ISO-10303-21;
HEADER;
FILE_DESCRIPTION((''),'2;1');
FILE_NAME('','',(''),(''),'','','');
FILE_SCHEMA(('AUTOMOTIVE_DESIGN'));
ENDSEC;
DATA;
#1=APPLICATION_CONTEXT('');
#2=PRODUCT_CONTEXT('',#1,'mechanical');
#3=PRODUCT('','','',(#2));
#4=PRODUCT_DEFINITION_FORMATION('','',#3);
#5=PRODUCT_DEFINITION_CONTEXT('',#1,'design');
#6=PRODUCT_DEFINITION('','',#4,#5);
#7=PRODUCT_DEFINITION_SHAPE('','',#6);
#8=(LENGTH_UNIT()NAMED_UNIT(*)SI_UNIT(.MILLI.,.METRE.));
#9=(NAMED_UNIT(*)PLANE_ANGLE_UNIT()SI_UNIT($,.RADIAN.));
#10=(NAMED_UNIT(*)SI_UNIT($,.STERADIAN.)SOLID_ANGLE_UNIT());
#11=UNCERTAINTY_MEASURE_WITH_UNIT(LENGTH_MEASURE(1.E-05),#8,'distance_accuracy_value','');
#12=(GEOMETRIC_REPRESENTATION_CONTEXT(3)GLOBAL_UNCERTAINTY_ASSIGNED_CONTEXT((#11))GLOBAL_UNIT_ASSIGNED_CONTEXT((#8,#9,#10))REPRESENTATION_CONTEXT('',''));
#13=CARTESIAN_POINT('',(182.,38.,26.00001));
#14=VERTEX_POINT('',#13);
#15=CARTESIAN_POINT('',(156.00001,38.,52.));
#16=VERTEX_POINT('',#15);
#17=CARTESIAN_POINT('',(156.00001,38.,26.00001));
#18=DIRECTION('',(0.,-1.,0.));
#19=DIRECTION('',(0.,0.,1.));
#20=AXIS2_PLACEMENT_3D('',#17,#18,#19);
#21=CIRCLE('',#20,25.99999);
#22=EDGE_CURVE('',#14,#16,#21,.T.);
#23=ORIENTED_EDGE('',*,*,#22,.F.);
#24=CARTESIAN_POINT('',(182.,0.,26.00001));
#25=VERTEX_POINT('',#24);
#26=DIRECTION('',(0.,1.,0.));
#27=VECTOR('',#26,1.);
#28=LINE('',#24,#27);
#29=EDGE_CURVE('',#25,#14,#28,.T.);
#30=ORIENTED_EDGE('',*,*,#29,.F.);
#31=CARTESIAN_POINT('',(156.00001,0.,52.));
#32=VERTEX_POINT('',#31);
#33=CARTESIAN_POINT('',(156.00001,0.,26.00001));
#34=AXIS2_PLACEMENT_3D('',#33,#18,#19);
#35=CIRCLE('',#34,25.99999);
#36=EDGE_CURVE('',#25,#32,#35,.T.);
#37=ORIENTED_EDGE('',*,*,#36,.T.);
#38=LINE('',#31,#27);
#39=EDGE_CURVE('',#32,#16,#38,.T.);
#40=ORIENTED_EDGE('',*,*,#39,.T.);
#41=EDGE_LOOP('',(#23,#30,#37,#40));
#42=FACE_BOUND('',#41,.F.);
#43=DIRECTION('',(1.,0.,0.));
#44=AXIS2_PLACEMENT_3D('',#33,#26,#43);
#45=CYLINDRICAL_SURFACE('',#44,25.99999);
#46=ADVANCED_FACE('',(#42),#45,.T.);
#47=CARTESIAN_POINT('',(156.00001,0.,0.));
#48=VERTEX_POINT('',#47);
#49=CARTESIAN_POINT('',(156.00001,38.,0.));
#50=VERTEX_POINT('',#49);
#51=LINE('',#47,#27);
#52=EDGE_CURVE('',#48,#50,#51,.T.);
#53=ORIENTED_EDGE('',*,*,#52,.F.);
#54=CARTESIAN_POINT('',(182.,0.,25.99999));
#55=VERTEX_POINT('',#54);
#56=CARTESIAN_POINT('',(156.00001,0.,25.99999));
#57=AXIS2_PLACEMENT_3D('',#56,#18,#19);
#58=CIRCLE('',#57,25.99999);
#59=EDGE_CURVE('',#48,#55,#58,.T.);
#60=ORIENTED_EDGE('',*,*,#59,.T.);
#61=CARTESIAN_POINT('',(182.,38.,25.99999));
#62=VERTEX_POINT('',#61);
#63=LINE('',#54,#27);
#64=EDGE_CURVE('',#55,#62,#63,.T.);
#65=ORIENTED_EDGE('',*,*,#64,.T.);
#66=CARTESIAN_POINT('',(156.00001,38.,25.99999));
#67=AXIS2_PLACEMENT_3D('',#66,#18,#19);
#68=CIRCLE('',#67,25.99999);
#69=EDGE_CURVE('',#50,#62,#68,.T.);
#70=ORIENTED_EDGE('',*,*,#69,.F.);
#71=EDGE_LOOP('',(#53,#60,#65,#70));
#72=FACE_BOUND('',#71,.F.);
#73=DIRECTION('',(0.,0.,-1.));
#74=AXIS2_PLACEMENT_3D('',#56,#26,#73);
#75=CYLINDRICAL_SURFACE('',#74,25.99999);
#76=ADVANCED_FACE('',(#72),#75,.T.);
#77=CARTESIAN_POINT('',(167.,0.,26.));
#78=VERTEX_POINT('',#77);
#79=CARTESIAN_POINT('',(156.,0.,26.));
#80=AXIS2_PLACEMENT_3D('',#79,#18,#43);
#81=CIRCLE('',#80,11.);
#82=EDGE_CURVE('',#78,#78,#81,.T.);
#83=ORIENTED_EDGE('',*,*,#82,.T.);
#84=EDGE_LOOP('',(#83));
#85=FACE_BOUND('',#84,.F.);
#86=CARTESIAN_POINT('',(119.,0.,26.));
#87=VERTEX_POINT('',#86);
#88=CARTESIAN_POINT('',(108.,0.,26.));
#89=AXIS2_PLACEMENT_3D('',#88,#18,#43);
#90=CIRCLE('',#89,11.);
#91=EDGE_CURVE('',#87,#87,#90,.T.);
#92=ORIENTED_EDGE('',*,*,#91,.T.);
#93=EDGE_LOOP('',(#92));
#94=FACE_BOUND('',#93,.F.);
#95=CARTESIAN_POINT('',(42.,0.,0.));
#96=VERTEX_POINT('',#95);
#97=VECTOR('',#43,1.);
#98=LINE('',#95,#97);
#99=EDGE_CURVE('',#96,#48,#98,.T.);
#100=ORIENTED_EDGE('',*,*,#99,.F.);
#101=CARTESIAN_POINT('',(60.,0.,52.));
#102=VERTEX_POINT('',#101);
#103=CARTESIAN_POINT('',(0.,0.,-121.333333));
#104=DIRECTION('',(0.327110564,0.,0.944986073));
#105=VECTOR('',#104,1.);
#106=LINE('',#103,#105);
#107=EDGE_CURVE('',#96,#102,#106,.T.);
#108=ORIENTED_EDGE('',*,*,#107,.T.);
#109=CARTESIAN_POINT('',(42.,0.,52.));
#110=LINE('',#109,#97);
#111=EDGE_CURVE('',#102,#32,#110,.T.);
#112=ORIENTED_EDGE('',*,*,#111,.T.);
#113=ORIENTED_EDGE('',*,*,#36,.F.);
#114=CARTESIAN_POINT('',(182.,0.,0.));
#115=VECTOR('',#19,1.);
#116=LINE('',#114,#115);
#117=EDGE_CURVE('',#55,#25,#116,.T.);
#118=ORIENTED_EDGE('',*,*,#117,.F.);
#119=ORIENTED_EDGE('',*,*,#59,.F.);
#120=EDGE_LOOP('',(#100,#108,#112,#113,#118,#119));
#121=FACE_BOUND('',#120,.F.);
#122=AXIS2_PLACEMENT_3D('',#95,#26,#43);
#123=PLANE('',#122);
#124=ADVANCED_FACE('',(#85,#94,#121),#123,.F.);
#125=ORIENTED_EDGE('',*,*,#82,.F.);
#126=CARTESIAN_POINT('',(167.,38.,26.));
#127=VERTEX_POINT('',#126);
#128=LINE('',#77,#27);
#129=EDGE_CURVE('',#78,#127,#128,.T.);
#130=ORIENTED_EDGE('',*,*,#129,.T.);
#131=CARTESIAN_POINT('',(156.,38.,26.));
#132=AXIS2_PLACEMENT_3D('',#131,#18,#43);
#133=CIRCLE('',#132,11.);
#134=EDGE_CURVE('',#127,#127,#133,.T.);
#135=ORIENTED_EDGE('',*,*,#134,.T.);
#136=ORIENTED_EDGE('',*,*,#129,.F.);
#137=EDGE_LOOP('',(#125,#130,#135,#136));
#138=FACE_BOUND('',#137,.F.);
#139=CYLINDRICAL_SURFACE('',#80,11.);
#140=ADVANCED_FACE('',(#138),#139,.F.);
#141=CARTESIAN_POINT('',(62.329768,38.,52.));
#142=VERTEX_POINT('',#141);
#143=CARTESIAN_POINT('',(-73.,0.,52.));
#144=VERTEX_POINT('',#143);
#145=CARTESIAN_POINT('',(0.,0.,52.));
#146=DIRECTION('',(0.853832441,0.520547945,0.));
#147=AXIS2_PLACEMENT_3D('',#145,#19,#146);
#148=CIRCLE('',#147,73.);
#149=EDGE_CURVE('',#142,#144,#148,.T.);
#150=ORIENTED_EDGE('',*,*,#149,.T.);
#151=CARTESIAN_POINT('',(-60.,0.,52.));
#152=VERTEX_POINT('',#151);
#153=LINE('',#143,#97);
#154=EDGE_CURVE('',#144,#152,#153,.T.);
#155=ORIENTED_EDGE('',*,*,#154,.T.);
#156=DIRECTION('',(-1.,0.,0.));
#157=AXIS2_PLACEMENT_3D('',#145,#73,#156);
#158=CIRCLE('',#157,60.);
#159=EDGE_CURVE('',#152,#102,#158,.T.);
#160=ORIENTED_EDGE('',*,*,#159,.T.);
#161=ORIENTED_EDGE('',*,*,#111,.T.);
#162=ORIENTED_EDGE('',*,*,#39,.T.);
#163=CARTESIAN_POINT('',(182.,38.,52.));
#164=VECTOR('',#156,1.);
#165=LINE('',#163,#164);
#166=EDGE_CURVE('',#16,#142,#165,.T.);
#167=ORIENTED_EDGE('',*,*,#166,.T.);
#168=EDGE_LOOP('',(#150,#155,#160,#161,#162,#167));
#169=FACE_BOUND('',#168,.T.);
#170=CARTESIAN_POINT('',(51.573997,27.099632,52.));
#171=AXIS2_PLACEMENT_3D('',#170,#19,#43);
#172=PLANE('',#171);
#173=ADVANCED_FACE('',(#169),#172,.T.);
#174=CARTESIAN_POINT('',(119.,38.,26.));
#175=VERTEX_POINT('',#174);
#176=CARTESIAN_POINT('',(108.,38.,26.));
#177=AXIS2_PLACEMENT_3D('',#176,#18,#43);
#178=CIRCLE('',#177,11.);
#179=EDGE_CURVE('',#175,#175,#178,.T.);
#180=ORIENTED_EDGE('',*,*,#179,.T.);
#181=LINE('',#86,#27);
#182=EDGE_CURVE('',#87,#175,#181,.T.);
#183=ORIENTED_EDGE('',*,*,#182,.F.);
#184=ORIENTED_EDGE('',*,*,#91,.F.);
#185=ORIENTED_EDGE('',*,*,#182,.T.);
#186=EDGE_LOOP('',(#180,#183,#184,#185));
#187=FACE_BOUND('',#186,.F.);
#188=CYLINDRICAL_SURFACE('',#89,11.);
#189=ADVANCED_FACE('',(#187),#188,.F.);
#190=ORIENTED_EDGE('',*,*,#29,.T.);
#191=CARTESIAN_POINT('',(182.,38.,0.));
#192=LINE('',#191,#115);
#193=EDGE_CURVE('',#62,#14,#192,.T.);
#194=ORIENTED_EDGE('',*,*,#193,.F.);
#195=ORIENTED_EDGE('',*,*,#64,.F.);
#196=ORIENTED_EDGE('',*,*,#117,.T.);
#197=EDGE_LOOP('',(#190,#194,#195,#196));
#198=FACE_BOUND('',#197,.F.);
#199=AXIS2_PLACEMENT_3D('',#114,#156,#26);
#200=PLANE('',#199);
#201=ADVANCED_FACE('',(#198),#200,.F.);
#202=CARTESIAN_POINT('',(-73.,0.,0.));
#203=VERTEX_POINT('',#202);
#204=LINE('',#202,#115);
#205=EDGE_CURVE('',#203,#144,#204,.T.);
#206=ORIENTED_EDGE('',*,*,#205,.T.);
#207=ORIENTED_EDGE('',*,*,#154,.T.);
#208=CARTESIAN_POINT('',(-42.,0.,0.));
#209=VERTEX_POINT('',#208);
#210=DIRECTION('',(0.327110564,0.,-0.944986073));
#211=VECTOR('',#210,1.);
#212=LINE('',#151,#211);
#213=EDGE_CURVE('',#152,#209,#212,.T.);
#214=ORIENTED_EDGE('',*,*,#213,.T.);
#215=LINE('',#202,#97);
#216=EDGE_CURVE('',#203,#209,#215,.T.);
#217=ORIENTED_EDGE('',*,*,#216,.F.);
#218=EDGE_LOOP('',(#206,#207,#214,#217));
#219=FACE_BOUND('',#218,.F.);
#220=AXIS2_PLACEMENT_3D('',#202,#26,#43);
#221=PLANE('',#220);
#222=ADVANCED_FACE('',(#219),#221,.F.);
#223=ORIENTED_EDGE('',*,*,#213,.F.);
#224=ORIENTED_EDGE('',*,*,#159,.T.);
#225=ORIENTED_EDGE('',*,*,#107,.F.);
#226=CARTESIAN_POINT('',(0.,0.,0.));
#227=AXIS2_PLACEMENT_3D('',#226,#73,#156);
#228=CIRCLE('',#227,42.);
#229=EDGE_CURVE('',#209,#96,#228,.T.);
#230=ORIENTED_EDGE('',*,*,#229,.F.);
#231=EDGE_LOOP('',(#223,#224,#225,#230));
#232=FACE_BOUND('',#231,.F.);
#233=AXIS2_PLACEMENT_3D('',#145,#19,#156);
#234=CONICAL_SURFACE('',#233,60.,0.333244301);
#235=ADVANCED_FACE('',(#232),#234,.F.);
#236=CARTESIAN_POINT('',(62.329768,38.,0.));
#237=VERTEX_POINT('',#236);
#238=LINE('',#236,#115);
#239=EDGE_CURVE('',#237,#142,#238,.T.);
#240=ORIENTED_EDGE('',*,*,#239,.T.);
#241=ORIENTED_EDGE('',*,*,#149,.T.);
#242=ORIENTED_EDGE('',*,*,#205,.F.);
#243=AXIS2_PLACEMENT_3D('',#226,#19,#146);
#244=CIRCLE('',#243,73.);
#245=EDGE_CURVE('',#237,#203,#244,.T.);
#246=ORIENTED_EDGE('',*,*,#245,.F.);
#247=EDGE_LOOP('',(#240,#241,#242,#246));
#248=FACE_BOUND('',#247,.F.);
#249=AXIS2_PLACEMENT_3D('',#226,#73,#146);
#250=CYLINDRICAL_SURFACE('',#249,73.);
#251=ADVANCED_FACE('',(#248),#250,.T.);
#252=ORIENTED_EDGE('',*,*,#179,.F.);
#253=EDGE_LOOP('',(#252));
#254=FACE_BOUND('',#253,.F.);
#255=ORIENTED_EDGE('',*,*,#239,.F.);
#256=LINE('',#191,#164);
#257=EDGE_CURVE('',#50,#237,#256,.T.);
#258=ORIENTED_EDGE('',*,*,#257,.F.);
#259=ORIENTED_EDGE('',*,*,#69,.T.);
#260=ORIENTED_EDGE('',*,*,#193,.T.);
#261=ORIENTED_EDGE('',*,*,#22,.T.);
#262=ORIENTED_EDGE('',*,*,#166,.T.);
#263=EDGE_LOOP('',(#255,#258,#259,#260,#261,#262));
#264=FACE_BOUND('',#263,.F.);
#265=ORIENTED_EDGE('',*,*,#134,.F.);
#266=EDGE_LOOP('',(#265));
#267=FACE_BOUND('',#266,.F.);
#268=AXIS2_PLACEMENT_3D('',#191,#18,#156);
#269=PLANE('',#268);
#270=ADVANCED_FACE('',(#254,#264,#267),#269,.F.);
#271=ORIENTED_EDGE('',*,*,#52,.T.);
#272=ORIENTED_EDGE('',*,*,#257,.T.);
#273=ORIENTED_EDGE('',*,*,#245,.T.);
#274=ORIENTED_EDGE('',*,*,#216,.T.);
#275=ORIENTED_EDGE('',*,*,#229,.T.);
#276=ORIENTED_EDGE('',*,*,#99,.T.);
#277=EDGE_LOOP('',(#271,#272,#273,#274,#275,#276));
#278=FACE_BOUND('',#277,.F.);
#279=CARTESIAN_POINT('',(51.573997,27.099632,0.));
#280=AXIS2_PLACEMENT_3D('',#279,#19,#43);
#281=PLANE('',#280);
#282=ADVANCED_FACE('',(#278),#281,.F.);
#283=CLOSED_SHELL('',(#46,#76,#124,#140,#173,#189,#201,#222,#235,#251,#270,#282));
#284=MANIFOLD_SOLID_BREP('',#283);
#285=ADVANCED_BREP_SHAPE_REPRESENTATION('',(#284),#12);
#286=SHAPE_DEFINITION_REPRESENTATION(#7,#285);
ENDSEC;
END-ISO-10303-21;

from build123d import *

# Parameters (mm, degrees)
F1_DEPTH = 52
F4_R     = 11
F5_DEPTH = 44.7
F6_R     = 25.99999


# Not quite as in the source:
# - a fillet or chamfer is up to 0.001 mm smaller than in the source, because OpenCascade refuses the exact size


with BuildPart() as f1:
    # F0 (on Top) → F1 (new body)
    with BuildSketch(Plane.XY):
        with BuildLine():
            ThreePointArc((-42, 0), (0, 42), (42, 0))
            Line((42, 0), (182, 0))
            Line((182, 0), (182, 38))
            Line((182, 38), (62.329768169, 38))
            ThreePointArc((62.329768169, 38), (-19.7348286497, 70.2818364741), (-73, 0))
            Line((-73, 0), (-42, 0))
        make_face()
    extrude(amount=F1_DEPTH)

    # F2 (on face) → F3 (revolve, cut)
    with BuildSketch(Plane.XZ):
        Polygon((0, 0), (0, 52), (-60, 52), (-42, 0), align=None)
    revolve(axis=Axis((0, 0, 26), (0, 0, -1)), mode=Mode.SUBTRACT)

    # F4 (on face) → F5 (cut)
    with BuildSketch(Plane.XZ):
        with Locations((108, 26)):
            Circle(F4_R)
        with Locations((156, 26)):
            Circle(F4_R)
    extrude(amount=-F5_DEPTH, mode=Mode.SUBTRACT)

    # F6 (radius 26 in the source; OpenCascade refuses exactly that, so slightly less here)
    f6_edges = [f1.edges().sort_by_distance(p)[0] for p in [
        (182, 19, 52),
        (182, 19, 0),
    ]]
    fillet(f6_edges, radius=F6_R)


solid = f1.part
